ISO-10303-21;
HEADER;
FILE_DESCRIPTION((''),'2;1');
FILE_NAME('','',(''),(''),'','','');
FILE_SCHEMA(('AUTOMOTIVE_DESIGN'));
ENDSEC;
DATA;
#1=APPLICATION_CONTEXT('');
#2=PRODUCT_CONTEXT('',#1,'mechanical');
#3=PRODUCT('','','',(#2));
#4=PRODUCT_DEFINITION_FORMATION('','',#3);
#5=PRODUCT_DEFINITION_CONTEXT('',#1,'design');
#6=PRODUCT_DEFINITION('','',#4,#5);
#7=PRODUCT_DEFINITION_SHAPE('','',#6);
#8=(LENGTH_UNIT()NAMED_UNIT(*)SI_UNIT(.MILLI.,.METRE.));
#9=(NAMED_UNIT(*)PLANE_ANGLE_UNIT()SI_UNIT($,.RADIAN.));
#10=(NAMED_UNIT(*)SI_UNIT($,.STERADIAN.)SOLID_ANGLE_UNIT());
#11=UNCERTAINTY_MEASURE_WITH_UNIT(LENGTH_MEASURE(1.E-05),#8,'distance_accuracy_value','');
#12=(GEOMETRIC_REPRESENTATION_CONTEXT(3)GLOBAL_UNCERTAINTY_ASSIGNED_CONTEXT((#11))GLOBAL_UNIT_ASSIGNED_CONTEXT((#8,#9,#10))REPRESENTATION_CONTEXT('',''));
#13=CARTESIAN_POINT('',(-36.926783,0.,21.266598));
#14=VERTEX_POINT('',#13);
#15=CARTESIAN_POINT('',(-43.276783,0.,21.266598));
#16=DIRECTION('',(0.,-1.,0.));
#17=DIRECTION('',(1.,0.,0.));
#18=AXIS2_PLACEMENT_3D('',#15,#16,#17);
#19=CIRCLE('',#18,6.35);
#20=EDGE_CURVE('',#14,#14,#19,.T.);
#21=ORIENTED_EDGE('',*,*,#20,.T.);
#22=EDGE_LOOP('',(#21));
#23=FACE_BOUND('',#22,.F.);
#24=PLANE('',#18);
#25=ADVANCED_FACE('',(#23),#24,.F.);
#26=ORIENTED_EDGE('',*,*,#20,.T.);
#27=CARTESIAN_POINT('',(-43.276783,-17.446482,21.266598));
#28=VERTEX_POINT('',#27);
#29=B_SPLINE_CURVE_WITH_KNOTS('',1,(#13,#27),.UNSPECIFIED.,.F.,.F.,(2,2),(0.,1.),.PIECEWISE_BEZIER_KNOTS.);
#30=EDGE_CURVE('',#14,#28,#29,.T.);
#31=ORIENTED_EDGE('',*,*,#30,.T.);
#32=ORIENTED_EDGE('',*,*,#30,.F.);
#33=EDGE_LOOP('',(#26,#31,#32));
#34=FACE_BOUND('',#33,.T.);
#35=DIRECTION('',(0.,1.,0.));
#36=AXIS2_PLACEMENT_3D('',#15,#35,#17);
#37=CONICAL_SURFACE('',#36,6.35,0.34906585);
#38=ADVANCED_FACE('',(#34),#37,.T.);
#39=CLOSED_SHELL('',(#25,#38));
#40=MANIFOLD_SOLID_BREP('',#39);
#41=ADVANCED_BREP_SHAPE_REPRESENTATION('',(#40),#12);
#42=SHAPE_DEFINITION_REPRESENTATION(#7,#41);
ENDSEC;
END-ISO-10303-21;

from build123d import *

# Parameters (mm, degrees)
F0_R = 6.35


# Not quite as in the source:
# - an extrude whose draft closes it to a point is written as a loft to that point


with BuildPart() as f1:
    # F0 (on Front) → F1 section 0
    with BuildSketch(Plane.XZ, mode=Mode.PRIVATE) as f1_s0:
        with Locations((-43.2767830789, 21.2665982544)):
            Circle(F0_R)
    loft([f1_s0.sketch, Vertex(-43.2767830789, -17.4464816135, 21.2665982544)], ruled=True)


solid = f1.part
